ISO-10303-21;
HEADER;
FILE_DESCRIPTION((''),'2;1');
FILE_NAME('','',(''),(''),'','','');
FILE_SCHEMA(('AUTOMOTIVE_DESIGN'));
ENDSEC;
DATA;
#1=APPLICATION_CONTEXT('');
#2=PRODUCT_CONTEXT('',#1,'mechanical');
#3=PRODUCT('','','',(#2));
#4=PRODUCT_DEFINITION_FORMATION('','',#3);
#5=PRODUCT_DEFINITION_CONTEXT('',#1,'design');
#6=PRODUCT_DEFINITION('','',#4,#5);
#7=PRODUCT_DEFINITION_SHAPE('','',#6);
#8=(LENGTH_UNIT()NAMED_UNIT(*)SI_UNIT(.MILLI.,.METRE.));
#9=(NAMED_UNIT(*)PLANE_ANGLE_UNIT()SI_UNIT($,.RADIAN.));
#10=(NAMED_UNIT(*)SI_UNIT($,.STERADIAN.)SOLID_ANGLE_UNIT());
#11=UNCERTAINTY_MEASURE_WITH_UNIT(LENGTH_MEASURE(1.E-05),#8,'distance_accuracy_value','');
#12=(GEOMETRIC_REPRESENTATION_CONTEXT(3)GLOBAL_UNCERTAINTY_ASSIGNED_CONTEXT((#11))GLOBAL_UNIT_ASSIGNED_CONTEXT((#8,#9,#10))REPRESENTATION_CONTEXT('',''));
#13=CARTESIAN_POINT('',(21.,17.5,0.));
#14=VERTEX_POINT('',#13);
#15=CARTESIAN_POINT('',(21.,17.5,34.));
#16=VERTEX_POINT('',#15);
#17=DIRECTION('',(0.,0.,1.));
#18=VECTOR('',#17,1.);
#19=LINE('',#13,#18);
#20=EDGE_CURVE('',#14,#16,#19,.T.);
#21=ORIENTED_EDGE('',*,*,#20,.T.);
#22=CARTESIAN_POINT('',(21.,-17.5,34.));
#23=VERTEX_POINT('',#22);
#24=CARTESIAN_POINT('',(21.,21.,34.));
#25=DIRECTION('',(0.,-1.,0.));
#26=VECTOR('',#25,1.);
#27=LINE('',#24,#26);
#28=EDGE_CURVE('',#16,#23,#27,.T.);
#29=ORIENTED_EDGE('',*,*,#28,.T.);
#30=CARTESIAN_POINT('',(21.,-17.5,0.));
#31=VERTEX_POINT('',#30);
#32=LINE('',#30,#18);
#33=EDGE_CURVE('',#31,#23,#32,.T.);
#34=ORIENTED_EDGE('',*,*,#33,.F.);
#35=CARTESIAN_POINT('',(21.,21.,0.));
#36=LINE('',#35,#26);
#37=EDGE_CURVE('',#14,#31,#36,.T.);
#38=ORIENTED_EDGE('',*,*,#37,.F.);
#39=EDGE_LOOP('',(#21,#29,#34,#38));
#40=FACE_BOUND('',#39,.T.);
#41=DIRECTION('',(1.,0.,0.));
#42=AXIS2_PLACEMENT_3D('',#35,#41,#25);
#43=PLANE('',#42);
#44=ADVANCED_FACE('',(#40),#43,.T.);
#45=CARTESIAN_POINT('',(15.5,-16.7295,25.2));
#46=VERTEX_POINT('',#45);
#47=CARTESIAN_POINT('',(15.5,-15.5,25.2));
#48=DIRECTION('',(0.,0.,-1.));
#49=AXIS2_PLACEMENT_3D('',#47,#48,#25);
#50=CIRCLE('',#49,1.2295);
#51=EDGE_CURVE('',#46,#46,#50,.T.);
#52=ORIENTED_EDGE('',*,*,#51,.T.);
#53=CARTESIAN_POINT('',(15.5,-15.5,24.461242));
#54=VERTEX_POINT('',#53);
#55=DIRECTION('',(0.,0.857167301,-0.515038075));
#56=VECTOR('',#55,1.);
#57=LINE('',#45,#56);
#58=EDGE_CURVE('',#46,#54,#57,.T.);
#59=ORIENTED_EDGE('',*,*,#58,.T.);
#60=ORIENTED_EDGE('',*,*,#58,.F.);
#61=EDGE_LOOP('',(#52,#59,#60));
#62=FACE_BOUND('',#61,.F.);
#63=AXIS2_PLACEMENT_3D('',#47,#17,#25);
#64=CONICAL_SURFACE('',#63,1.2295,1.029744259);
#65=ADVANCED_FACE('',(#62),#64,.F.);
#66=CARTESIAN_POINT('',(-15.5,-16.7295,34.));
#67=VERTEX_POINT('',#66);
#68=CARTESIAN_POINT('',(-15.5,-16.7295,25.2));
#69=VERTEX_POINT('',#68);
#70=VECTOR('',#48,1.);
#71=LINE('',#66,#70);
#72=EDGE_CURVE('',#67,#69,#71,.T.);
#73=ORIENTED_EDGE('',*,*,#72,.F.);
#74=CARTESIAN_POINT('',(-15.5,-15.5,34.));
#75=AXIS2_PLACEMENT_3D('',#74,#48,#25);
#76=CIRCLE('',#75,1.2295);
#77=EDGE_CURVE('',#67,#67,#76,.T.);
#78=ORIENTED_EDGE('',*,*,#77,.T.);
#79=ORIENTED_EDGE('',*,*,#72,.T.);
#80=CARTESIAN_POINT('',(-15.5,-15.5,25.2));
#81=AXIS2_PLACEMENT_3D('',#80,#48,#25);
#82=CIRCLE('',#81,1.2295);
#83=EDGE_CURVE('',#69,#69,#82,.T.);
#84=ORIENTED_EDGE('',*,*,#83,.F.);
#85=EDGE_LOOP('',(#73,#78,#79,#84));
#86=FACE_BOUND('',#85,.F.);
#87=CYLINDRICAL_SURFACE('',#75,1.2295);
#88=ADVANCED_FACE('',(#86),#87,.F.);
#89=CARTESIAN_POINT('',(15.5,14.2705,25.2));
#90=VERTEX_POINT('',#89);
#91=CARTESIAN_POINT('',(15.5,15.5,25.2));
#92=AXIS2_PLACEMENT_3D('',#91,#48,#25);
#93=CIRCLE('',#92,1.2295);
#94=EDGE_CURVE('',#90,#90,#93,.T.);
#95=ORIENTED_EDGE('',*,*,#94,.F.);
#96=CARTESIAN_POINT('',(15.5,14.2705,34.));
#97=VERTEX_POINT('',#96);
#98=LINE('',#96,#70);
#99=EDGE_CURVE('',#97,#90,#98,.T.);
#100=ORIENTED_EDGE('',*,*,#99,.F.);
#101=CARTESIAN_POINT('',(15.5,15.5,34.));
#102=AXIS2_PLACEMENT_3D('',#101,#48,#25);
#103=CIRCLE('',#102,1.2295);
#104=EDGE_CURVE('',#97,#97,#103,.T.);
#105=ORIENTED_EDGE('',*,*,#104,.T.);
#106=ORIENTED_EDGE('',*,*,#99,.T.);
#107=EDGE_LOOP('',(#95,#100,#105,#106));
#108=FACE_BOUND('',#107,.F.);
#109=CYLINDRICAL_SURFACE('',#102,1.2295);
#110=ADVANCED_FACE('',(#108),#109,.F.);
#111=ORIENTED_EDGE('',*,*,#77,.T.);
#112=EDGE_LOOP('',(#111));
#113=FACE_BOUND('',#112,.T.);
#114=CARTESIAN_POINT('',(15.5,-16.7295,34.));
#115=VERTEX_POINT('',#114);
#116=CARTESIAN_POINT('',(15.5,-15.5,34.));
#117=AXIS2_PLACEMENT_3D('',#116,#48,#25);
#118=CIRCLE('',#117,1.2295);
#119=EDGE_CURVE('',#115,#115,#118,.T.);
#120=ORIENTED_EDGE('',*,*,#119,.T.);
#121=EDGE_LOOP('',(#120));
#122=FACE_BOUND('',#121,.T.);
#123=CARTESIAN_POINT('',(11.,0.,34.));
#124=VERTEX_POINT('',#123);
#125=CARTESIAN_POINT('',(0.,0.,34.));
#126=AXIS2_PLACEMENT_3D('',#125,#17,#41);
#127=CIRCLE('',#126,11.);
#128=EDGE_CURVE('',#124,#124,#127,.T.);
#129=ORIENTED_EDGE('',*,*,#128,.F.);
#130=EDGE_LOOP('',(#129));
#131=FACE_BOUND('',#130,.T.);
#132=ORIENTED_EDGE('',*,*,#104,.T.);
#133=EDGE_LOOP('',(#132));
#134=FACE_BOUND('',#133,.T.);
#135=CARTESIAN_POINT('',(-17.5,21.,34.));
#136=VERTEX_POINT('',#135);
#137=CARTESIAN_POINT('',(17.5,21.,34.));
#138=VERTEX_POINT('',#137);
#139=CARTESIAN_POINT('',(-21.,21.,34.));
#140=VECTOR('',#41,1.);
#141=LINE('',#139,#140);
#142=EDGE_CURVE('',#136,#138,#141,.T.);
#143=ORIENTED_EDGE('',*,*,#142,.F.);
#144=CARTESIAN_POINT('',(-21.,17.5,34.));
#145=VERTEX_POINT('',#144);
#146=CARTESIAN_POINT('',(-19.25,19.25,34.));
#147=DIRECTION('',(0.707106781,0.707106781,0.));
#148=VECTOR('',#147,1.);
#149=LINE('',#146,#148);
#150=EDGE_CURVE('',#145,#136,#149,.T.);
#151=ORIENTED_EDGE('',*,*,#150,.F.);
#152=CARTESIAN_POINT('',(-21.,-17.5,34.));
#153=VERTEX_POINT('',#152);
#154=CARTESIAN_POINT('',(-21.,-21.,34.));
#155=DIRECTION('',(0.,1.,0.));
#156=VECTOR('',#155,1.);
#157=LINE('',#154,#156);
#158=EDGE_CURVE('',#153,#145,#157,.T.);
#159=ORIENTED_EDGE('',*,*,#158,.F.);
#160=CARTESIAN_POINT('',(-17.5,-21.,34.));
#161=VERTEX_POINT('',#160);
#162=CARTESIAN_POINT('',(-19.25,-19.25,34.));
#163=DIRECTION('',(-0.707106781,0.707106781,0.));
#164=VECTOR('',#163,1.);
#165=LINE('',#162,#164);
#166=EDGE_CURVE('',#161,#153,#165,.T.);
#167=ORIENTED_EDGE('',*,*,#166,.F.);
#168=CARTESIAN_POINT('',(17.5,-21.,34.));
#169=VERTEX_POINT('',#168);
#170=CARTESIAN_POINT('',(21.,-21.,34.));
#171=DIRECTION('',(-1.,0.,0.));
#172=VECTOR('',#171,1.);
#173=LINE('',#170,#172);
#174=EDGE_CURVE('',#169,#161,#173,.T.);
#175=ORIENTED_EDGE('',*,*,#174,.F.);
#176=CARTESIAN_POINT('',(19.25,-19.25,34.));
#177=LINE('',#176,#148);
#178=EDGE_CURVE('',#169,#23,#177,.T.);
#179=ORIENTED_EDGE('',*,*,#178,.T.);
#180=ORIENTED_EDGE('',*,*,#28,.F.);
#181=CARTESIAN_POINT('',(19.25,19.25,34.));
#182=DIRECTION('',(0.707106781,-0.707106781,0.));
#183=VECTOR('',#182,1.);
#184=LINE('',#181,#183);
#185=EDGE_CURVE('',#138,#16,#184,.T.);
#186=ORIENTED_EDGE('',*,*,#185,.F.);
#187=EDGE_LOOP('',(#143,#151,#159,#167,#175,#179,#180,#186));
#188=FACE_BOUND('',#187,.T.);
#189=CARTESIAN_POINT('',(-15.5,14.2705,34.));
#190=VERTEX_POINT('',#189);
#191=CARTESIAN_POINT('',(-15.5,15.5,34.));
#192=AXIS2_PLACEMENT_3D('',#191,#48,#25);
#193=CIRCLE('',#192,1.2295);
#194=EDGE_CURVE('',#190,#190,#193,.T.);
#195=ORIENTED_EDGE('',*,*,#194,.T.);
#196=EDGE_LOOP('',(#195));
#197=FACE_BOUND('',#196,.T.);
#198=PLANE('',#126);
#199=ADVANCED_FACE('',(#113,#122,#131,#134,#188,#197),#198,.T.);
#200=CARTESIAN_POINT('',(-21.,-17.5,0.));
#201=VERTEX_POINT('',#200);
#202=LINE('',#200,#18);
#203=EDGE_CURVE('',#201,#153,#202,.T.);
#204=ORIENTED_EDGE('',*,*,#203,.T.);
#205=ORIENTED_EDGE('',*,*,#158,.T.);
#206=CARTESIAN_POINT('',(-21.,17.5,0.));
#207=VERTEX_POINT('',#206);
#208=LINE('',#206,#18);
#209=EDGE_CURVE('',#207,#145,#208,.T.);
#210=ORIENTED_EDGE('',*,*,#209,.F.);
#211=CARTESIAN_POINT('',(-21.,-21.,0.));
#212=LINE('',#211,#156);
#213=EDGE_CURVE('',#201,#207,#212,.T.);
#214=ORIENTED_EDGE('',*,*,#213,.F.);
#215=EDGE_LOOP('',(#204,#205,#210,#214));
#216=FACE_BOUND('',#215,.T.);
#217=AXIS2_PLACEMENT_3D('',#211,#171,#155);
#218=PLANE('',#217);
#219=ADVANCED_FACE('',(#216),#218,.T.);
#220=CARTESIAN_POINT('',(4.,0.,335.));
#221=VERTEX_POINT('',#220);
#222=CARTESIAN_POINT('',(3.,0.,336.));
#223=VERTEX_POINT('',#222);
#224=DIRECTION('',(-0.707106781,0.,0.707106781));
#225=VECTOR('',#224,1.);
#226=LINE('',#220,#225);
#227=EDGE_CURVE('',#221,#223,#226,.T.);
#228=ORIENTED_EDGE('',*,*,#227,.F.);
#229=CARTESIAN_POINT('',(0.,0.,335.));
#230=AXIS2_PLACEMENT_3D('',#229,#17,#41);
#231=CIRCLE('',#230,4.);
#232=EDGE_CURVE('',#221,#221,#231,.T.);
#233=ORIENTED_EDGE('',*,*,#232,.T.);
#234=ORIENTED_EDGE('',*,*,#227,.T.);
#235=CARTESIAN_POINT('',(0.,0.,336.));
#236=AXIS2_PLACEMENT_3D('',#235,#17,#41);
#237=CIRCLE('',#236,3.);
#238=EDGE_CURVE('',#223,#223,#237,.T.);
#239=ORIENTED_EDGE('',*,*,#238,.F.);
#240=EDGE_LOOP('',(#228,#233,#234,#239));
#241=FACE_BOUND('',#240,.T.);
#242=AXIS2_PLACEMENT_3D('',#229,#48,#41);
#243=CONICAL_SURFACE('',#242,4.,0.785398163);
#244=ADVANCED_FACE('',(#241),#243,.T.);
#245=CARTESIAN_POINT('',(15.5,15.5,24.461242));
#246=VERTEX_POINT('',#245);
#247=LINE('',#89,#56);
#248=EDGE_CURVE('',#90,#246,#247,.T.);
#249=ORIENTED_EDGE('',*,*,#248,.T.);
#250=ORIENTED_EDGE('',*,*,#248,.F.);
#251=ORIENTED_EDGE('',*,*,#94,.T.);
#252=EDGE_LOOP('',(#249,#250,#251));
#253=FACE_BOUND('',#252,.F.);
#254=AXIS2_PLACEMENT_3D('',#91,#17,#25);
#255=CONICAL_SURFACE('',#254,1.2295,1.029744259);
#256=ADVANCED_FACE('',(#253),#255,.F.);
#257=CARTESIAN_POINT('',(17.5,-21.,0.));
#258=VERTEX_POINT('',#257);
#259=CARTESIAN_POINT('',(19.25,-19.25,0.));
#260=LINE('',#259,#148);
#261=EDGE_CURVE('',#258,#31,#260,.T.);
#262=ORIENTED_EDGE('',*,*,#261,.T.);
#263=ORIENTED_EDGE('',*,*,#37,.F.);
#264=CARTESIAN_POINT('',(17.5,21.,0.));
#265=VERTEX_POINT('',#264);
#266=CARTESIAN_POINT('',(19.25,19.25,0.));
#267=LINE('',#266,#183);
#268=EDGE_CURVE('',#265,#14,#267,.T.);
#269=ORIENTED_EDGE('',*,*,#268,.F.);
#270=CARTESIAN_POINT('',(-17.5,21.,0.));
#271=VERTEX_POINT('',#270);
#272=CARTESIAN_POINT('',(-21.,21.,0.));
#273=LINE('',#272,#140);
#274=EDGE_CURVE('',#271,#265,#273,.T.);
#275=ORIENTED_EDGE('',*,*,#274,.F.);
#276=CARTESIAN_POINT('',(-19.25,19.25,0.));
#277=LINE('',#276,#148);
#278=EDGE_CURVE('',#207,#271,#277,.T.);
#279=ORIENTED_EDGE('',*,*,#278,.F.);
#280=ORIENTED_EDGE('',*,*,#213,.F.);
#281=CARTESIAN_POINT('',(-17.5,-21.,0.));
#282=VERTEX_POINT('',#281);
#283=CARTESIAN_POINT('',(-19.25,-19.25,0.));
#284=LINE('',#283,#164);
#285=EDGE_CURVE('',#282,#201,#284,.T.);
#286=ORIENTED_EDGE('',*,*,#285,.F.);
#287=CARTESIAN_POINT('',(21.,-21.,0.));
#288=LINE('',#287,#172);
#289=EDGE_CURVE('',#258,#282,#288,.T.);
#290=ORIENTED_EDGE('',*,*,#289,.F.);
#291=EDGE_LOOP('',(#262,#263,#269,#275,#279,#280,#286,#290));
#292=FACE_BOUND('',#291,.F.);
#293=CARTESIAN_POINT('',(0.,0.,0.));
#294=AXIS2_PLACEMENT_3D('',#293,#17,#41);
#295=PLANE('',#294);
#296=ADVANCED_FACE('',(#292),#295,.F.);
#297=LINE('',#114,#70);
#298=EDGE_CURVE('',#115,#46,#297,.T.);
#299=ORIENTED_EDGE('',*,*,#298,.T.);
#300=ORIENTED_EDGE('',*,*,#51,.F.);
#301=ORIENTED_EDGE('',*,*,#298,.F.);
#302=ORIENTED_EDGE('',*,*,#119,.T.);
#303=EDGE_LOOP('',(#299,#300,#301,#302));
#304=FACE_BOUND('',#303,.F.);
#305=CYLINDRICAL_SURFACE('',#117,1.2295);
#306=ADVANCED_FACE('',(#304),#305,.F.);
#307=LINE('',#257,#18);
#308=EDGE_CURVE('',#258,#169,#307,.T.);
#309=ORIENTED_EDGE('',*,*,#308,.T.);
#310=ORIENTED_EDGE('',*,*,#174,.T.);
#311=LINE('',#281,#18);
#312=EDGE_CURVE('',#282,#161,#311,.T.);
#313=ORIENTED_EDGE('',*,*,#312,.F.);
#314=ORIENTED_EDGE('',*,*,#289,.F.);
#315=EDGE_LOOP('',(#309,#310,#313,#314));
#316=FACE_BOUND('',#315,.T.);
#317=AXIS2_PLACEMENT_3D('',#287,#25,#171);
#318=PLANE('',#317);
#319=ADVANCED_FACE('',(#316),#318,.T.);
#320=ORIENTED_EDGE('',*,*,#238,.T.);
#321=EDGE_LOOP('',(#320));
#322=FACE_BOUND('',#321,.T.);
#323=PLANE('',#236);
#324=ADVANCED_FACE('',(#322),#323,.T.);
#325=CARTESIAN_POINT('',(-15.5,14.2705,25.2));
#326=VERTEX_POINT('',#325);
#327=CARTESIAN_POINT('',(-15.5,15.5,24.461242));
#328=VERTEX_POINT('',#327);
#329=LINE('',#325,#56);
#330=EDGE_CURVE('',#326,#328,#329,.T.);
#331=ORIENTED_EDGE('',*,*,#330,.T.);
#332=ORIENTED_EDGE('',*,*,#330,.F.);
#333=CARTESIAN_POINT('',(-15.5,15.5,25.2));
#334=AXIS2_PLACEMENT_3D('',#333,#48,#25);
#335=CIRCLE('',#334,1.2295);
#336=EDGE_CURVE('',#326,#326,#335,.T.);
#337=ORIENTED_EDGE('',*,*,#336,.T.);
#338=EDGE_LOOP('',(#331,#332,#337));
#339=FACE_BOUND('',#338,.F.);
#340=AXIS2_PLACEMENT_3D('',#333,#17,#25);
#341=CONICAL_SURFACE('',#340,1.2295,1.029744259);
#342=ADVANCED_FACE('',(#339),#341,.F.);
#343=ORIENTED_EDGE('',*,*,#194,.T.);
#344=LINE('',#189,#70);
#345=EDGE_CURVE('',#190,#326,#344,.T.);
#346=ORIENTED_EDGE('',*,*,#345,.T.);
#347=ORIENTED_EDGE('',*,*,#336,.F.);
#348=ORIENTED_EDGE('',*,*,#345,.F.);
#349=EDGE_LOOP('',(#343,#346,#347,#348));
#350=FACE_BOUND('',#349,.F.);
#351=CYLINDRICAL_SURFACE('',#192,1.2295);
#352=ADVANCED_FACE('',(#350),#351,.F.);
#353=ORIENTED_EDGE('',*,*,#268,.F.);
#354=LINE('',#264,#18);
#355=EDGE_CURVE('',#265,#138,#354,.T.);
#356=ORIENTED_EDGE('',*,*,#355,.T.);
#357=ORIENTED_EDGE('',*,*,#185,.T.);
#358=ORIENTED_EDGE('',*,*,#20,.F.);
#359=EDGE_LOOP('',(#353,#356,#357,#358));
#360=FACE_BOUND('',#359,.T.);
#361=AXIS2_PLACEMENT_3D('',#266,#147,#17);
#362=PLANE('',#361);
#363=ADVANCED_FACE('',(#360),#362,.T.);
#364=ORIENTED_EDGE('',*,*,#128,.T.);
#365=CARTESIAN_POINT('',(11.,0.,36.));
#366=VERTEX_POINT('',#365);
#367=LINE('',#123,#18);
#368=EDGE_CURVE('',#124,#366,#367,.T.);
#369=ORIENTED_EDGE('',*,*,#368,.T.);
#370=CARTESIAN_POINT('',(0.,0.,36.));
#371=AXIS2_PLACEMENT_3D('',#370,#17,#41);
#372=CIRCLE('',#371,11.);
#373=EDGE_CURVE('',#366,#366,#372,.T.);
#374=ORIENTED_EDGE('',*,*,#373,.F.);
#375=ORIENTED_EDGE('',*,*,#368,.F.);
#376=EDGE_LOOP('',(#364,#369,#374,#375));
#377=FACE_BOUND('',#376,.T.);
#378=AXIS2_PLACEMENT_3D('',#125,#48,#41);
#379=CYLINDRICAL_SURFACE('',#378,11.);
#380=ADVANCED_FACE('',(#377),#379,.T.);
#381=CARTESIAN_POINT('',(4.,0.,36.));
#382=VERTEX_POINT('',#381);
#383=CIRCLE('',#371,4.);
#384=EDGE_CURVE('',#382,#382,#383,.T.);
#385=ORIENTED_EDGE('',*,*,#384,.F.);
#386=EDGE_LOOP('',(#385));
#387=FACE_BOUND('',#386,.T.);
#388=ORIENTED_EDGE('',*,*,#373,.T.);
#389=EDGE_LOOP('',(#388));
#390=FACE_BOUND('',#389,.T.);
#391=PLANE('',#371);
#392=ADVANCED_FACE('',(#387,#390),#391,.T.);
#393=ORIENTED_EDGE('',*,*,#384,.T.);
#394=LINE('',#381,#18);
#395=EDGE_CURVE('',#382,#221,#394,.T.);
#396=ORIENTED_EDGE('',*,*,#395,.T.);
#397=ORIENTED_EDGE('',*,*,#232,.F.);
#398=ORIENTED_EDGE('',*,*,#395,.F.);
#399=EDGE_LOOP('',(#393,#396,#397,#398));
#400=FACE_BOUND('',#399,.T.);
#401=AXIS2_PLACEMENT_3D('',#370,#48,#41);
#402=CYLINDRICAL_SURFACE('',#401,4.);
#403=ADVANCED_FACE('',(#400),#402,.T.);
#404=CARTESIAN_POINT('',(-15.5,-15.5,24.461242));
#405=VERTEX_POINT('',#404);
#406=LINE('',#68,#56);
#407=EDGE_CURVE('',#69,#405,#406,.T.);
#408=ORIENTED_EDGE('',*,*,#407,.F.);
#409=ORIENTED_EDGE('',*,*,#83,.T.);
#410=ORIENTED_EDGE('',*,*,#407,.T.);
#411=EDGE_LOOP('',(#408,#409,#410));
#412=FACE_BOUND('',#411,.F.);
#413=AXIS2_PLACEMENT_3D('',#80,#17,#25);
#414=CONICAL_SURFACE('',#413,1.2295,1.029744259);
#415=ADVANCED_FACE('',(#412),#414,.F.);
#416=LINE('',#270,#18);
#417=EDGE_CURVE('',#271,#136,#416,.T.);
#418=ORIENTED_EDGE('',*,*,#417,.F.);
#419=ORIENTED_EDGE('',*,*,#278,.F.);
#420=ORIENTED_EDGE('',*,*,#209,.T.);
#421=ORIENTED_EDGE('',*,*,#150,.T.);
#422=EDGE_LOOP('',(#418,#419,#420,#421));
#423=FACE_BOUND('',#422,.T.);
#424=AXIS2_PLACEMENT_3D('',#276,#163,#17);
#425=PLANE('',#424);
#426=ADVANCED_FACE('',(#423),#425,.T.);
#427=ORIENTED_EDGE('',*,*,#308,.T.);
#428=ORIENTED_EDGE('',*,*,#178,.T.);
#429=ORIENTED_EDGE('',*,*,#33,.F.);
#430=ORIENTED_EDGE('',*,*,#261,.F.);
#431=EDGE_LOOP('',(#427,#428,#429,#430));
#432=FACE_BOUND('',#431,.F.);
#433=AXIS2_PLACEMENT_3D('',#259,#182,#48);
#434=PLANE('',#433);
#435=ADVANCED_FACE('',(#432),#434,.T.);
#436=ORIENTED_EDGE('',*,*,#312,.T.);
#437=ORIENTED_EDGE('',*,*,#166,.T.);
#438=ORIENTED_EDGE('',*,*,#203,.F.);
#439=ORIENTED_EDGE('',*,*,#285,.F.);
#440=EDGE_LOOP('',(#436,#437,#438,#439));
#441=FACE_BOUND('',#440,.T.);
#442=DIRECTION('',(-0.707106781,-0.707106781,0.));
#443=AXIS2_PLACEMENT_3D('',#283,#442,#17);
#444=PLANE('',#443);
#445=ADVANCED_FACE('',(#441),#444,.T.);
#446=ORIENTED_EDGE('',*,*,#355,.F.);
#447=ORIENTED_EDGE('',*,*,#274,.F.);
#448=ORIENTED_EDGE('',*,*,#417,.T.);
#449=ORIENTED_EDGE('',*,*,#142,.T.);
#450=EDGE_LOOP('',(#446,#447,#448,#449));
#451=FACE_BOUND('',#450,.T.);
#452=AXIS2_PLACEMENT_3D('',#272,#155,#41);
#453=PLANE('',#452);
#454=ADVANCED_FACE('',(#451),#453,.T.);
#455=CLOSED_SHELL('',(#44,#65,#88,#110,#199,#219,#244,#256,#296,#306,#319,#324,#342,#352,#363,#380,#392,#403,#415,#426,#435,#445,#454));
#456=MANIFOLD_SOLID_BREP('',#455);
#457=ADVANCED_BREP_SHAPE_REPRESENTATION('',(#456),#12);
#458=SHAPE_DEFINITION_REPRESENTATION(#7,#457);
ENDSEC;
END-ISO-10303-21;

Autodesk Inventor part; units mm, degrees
ref_plane "YZ Plane" through (0, 0, 0) normal (1, 0, 0) x (0, 1, 0)
ref_plane "XZ Plane" through (0, 0, 0) normal (0, 1, 0) x (-1, 0, 0)
ref_plane "XY Plane" through (0, 0, 0) normal (0, 0, 1) x (1, 0, 0)
sketch "Sketch1" plane through (0, 0, 0) normal (0, 0, 1) x (1, 0, 0)
  line L0 (21, -21) -> (-21, -21)
  line L1 (-21, -21) -> (-21, 21)
  line L2 (-21, 21) -> (21, 21)
  line L3 (21, 21) -> (21, -21)
  line L4 (21, -21) -> (-21, 21) construction
  line L5 (-21, -21) -> (21, 21) construction
  point P0 (0, 0)
  dimension "d0" = 42
extrude "Extrusion1" add sketch "Sketch1" along normal blind 34
chamfer "Chamfer1" distance 3.5 angle 45 4 edges at (-21, 21, 17) (21, 21, 17) (21, -21, 17) (-21, -21, 17)
sketch "Sketch2" plane through (0, 0, 34) normal (0, 0, 1) x (1, 0, 0)
  circle A0 centre (0, 0) radius 11
  dimension "d6" = 22
extrude "Extrusion2" add sketch "Sketch2" along normal blind 2
sketch "Sketch3" plane through (0, 0, 36) normal (0, 0, 1) x (1, 0, 0)
  circle A0 centre (0, 0) radius 4
  dimension "d9" = 8
extrude "Extrusion3" add sketch "Sketch3" along normal blind 300
thread "Thread1" size "M8x1.25" class "6g" standard "ANSI Metric M Profile" full length
chamfer "Chamfer2" distance 1 angle 45 1 edges at (-4, 0, 336)
sketch "Sketch4" plane through (0, 0, 34) normal (0, 0, 1) x (1, 0, 0)
  line L0 (-17.5, -21) -> (17.5, -21) projected
  line L1 (17.5, 21) -> (-17.5, 21) projected
  line L2 (-21, 17.5) -> (-21, -17.5) projected
  point P0 (0, 0)
  point P1 (-15.5, 15.5)
  point P2 (-15.5, -15.5)
  point P3 (15.5, -15.5)
  point P4 (15.5, 15.5)
  dimension "d17" = 31
  dimension "d18" = 31
  dimension "d19" = 42
  dimension "d21" = 5.5
  dimension "d22" = 5.5
hole "Hole1" at (-15.5, 15.5, 34) at (-15.5, -15.5, 34) at (15.5, -15.5, 34) at (15.5, 15.5, 34) direction (0, 0, -1) diameter 2.459 depth 8.8 tip angle 118 thread size "M3x0.5" class "6H" standard "ISO Metric profile"
equation "\"d21\" = -0.5 * d18 + 0.5 * d19"
equation "\"d22\" = -0.5 * d18 + 0.5 * d19"
properties part number "Motor_Z" material "Steel, Alloy"
